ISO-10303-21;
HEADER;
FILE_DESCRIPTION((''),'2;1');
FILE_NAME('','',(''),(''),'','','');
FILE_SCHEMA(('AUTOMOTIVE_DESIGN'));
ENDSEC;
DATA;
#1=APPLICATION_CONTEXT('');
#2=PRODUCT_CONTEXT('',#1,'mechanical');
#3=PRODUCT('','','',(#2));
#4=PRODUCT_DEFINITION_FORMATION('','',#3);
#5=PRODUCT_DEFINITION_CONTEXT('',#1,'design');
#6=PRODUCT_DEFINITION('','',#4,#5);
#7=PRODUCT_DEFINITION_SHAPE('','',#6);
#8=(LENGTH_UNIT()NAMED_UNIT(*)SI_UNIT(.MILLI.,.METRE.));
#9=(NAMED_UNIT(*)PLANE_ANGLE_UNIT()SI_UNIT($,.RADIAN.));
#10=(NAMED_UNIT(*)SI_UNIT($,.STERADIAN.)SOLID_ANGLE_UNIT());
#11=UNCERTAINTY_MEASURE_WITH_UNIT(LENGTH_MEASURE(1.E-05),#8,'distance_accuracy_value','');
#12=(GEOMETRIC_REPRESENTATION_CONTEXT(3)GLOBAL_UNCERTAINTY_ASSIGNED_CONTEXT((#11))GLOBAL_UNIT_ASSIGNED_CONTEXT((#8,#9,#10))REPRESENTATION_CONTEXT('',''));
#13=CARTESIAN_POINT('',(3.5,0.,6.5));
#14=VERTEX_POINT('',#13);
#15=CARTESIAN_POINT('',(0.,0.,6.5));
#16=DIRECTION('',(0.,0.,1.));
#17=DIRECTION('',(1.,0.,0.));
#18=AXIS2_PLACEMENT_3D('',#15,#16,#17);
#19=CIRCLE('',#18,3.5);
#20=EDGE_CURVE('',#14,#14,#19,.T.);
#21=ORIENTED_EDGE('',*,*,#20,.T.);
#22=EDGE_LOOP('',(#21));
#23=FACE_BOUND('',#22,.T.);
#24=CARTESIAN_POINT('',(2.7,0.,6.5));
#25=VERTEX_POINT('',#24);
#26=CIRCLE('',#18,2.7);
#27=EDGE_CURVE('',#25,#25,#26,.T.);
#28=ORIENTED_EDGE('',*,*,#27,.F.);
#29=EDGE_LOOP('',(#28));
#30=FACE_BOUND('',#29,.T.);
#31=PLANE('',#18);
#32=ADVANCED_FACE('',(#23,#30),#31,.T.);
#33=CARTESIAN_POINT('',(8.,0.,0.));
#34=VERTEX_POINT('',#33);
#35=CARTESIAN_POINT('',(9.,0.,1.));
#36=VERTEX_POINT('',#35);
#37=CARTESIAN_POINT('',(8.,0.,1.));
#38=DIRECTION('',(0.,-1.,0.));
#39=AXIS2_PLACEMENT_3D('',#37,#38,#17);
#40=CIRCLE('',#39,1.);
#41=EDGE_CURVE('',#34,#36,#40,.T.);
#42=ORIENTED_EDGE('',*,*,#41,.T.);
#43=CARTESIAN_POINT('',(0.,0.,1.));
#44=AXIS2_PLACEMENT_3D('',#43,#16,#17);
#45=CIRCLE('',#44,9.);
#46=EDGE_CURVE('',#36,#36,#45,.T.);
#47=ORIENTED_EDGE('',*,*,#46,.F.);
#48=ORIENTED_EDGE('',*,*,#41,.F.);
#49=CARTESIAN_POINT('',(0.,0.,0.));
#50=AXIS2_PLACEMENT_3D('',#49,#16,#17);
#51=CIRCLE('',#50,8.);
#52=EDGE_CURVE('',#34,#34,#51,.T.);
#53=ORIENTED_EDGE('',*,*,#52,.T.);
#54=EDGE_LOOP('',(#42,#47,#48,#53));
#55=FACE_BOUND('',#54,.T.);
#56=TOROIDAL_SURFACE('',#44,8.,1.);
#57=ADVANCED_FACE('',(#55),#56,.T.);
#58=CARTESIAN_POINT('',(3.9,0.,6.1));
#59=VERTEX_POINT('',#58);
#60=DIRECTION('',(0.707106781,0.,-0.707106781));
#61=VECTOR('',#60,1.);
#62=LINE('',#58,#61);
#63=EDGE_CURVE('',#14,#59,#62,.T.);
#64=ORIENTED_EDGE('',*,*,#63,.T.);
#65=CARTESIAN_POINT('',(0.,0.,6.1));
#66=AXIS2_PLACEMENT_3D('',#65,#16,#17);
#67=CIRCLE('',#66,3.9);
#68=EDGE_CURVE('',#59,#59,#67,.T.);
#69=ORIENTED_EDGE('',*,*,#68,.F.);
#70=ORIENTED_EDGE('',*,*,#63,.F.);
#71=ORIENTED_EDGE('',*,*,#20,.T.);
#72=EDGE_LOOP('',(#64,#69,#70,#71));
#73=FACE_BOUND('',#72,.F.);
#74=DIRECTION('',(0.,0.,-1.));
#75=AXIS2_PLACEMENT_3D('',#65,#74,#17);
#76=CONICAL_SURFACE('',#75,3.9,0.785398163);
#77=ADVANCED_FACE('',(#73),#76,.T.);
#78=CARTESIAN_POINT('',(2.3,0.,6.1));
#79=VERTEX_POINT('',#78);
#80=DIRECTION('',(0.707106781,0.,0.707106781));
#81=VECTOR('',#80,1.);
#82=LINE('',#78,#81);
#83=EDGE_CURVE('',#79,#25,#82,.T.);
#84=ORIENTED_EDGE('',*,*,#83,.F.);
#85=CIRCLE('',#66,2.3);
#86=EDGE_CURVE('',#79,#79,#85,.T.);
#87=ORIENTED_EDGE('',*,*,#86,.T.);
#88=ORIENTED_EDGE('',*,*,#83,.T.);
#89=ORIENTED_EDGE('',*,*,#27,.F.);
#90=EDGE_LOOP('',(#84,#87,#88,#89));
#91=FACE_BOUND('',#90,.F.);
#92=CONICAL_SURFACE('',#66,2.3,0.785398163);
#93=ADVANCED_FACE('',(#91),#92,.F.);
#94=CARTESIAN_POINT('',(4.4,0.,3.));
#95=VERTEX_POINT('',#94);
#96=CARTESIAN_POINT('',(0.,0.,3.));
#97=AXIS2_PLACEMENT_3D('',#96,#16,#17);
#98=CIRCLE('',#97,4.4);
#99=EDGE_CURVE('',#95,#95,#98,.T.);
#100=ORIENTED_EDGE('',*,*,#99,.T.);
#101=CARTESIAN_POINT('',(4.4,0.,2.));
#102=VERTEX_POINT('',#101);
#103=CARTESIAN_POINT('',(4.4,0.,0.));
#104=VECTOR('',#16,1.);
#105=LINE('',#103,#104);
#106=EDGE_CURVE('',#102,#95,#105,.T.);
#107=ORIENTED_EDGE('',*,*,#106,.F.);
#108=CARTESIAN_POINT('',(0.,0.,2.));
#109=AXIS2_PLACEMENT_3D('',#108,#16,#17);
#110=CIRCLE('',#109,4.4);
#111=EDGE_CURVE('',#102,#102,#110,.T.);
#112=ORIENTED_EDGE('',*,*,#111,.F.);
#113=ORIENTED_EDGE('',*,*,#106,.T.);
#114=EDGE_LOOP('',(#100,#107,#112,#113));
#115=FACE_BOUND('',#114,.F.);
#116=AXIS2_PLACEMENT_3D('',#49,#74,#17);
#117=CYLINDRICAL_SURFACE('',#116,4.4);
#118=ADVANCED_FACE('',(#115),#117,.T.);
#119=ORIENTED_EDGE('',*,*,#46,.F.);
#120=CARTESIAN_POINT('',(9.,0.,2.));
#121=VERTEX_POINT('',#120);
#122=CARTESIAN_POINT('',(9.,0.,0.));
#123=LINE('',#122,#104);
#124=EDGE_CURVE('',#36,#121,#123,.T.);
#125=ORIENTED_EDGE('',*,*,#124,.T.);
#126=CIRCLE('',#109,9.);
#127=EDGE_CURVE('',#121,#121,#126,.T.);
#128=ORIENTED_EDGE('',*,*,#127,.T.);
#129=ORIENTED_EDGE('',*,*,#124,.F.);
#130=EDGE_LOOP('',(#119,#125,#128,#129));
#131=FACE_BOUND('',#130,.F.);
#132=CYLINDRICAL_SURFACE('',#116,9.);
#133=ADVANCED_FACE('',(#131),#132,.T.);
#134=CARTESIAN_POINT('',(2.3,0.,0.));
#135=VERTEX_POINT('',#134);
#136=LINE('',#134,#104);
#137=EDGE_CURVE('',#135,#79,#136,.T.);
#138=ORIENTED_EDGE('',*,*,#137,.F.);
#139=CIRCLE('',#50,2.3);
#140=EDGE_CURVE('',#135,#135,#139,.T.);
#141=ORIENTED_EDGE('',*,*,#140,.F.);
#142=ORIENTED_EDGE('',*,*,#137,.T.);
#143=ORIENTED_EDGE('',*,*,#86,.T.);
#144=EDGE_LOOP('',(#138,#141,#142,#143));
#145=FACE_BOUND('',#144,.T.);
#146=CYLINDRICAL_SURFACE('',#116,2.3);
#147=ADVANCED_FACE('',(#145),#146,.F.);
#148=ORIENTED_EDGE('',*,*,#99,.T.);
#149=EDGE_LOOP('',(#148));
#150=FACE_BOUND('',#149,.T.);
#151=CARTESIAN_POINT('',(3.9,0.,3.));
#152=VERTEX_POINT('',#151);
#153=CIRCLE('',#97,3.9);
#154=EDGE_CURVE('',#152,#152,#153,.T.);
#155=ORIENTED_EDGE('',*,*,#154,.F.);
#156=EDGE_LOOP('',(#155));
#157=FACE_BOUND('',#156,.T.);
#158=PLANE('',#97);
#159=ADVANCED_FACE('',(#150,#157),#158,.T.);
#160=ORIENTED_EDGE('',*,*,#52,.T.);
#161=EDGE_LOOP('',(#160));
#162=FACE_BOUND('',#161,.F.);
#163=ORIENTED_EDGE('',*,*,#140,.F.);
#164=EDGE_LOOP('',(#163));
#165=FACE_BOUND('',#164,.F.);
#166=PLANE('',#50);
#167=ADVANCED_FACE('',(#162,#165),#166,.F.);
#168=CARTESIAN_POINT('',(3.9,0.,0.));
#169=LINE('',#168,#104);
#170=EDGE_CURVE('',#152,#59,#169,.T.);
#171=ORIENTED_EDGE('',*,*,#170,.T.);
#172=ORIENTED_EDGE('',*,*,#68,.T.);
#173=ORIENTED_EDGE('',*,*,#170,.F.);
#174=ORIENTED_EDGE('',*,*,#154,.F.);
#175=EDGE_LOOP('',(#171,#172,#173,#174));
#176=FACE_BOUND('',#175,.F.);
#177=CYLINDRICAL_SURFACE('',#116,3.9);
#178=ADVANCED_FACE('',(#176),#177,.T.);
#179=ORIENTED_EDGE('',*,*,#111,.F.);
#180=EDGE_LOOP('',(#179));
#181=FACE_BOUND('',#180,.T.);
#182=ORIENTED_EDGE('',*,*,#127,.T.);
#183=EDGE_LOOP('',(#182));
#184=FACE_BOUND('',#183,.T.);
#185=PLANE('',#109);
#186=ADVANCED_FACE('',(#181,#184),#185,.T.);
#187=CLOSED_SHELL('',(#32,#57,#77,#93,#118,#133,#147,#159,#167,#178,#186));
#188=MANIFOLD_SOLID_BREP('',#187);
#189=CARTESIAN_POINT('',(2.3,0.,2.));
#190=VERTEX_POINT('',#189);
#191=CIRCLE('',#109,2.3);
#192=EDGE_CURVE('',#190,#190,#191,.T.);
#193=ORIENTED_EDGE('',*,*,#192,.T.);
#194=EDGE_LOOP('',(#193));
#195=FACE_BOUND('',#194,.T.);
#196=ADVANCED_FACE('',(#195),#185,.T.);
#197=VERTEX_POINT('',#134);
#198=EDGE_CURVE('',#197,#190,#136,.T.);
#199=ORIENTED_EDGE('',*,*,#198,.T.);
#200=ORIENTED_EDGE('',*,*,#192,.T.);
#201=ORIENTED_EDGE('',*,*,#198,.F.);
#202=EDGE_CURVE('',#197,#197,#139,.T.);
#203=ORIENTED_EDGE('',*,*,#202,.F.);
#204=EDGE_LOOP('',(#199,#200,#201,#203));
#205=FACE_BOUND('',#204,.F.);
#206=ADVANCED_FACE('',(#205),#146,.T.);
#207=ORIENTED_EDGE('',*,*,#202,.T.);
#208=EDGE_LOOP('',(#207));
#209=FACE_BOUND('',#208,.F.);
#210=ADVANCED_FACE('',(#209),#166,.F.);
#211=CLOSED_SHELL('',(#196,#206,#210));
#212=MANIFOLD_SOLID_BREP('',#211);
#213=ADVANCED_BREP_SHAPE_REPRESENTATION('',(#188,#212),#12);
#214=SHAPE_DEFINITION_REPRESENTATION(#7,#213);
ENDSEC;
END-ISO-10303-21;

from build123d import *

# Parameters (mm, degrees)
F0_R     = 9
F0_R_2   = 4.4
F1_DEPTH = 2
F0_R_3   = 2.3
F0_R_4   = 3.9
F2_DEPTH = 3
F3_DEPTH = 6.5
F4_R     = 1
F5_SIZE  = 0.4


with BuildPart() as f1:
    # F0 (on Top) → F1 (new body)
    with BuildSketch(Plane.XY):
        Circle(F0_R)
        Circle(F0_R_2, mode=Mode.SUBTRACT)
    extrude(amount=F1_DEPTH)

    # F0 (on Top) → F2 (join)
    with BuildSketch(Plane.XY):
        Circle(F0_R_2)
        Circle(F0_R_4, mode=Mode.SUBTRACT)
    extrude(amount=F2_DEPTH)

    # F0 (on Top) → F3 (join)
    with BuildSketch(Plane.XY):
        Circle(F0_R_4)
        Circle(F0_R_3, mode=Mode.SUBTRACT)
    extrude(amount=F3_DEPTH)

    # F4
    f4_edges = [f1.edges().sort_by_distance(p)[0] for p in [
        (-9, 0, 0),
    ]]
    fillet(f4_edges, radius=F4_R)

    # F5
    f5_edges = [f1.edges().sort_by_distance(p)[0] for p in [
        (-3.9, 0, 6.5),
        (-2.3, 0, 6.5),
    ]]
    chamfer(f5_edges, length=F5_SIZE)


with BuildPart() as f1b:
    # F0 (on Top) → F1, piece 2 (new body)
    with BuildSketch(Plane.XY):
        Circle(F0_R_3)
    extrude(amount=F1_DEPTH)


solid = Compound([f1.part, f1b.part])
